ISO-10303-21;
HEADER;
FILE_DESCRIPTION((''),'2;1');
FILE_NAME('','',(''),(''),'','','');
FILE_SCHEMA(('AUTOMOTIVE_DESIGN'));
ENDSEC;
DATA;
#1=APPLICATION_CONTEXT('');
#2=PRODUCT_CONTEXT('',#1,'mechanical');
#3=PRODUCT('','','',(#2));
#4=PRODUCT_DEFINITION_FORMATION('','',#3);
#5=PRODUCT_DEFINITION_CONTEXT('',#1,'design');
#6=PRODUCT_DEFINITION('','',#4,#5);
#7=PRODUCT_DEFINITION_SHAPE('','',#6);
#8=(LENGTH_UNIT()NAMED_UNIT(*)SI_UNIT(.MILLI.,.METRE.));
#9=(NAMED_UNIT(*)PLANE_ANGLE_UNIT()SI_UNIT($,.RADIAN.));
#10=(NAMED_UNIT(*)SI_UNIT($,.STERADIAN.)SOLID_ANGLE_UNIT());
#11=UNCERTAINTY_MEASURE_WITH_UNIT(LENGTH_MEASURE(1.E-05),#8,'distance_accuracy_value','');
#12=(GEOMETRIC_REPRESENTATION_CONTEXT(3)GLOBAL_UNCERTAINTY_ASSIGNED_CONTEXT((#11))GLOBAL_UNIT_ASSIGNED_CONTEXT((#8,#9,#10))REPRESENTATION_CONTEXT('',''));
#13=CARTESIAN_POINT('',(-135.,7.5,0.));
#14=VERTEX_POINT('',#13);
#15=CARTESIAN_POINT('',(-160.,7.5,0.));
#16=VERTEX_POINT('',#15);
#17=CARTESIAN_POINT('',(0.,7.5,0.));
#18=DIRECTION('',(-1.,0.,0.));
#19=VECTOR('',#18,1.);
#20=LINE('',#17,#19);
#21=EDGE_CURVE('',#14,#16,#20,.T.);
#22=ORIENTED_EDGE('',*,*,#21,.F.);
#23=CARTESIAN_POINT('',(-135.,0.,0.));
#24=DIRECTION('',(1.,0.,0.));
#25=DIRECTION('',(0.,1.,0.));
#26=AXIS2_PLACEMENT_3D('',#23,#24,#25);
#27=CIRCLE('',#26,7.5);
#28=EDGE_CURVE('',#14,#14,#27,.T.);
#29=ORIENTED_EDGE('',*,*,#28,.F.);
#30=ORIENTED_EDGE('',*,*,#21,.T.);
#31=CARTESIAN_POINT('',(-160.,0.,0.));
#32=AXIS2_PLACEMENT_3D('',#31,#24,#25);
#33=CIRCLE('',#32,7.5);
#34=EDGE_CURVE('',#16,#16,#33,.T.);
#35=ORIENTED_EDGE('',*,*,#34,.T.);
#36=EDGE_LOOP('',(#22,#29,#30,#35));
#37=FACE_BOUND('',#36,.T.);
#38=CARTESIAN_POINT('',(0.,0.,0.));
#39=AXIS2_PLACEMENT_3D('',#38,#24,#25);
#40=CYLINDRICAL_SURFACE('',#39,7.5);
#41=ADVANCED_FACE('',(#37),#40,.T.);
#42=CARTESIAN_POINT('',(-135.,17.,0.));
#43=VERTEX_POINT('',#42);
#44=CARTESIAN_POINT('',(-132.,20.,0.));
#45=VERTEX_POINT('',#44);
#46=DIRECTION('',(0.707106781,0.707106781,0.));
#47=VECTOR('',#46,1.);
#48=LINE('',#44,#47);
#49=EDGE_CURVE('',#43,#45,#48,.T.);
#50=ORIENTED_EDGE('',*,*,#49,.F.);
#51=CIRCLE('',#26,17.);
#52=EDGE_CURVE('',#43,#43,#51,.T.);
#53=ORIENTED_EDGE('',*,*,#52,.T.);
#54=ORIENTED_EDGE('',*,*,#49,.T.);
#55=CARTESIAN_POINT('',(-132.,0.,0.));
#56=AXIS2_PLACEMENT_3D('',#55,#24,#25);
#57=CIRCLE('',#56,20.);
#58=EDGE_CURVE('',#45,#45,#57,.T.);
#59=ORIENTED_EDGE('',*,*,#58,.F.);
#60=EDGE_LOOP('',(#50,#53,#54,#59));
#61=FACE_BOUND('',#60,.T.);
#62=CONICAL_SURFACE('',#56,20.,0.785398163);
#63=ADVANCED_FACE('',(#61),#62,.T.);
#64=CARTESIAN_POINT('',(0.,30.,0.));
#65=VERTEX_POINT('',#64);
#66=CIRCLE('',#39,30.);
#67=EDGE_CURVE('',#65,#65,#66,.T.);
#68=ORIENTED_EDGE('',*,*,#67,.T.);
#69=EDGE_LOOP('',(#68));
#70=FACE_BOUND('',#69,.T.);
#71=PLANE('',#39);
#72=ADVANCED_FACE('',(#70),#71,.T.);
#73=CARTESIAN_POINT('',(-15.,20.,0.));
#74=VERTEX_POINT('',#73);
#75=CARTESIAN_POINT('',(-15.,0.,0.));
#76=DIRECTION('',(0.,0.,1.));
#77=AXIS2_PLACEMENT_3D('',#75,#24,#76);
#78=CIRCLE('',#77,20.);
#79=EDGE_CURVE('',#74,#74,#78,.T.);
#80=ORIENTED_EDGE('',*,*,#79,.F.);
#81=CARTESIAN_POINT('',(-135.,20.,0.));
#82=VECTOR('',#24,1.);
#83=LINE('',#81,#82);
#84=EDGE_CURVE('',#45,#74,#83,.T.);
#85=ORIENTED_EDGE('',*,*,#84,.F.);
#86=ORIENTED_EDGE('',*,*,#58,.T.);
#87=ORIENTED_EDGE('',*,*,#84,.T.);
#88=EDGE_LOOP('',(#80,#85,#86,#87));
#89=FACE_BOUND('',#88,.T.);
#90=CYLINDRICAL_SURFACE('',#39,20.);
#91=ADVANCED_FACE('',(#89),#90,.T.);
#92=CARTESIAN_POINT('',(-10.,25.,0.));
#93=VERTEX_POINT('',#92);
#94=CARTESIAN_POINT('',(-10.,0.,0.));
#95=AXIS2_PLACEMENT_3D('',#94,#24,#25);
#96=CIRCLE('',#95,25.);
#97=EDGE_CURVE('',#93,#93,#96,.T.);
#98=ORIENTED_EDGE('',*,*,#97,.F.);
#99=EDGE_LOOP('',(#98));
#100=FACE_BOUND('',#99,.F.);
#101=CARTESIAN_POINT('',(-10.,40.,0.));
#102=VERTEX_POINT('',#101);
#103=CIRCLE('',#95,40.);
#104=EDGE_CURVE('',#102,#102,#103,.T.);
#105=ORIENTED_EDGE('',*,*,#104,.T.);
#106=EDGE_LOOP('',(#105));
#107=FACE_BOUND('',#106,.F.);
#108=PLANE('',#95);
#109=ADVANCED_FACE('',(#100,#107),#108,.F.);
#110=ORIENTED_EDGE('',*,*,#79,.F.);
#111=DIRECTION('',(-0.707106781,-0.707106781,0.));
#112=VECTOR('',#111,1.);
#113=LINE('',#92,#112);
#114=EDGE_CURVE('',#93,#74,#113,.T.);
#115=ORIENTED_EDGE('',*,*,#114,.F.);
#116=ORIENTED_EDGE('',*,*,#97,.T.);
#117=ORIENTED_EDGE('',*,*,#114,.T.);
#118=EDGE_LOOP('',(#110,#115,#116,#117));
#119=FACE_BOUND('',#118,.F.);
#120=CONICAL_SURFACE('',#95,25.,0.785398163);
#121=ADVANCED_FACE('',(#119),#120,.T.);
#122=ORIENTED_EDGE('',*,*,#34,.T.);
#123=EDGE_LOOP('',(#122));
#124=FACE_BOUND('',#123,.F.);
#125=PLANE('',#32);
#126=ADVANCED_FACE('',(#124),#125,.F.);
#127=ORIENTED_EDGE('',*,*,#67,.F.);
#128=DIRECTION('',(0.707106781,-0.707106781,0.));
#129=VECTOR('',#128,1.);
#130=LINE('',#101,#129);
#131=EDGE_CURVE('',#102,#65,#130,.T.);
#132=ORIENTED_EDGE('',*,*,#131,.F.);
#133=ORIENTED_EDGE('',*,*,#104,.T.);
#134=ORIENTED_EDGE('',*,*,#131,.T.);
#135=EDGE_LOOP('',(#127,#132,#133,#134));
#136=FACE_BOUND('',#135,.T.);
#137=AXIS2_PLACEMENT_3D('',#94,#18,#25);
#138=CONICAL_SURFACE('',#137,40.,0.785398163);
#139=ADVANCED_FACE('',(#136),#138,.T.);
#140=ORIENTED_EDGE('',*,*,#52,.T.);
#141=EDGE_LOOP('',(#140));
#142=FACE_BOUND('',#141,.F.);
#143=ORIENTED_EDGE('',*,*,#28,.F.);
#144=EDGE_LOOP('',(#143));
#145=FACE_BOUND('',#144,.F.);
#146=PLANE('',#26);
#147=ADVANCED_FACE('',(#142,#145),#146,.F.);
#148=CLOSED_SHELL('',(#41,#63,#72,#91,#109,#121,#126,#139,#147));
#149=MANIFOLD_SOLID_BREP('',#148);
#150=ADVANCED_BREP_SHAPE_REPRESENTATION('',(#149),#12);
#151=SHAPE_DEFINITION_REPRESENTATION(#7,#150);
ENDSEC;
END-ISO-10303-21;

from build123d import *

# Parameters (mm, degrees)
F0_R        = 40
F0_R_2      = 25
F1_DEPTH    = 10
F0_R_3      = 20
F2_DEPTH    = 20
F0_R_4      = 7.5
F3_DEPTH    = 135
F4_DEPTH    = 160
F5_S8_R     = 20
F5_T9_DEPTH = 37
F6_SIZE2    = 3
F6_SIZE     = 3


# Not quite as in the source:
# - a fillet or chamfer that OpenCascade refuses, or shapes differently, is made with other operations: its cross-section is extruded or revolved along the edge and cut away or added


with BuildPart() as f1:
    # F0 (on Right) → F1 (new body)
    with BuildSketch(Plane.YZ):
        Circle(F0_R)
        Circle(F0_R_2, mode=Mode.SUBTRACT)
    extrude(amount=-F1_DEPTH)

    # F0 (on Right) → F2 (join)
    with BuildSketch(Plane.YZ):
        Circle(F0_R_2)
        Circle(F0_R_3, mode=Mode.SUBTRACT)
    extrude(amount=-F2_DEPTH)

    # F0 (on Right) → F3 (join)
    with BuildSketch(Plane.YZ):
        Circle(F0_R_3)
        Circle(F0_R_4, mode=Mode.SUBTRACT)
    extrude(amount=-F3_DEPTH)

    # F0 (on Right) → F4 (join)
    with BuildSketch(Plane.YZ):
        Circle(F0_R_4)
    extrude(amount=-F4_DEPTH)

    # F5: chamfer of 10 on 2 edges, made by hand

    # F5_s1 → F5_t2 (revolve, cut)
    with BuildSketch(Plane.XY):
        Polygon((-10, 40), (0, 30), (0, 40), align=None)
    revolve(axis=Axis((0, 0, 0), (1, 0, 0)), mode=Mode.SUBTRACT)


with BuildPart() as f5_tool4:
    # F5_s5 → F5_t6 (revolve)
    with BuildSketch(Plane.XY):
        Polygon((-10, 25), (-20, 15), (-20, 25), align=None)
    revolve(axis=Axis((-20, 0, 0), (1, 0, 0)))

    split(bisect_by=Plane.YZ.offset(-10), keep=Keep.BOTTOM)

    # F5_s8 → F5_t9 (cut, symmetric)
    with BuildSketch(Plane.YZ.offset(-15)):
        Circle(F5_S8_R)
    extrude(amount=F5_T9_DEPTH, both=True, mode=Mode.SUBTRACT)


with BuildPart() as f1_1:
    add(f1.part)

    # F5_t3: cut F5_tool4
    add(f5_tool4.part, mode=Mode.SUBTRACT)

    # F6
    f6_edges = [f1_1.edges().sort_by_distance(p)[0] for p in [
        (-135, -20, 0),
    ]]
    chamfer(f6_edges, length=F6_SIZE, length2=F6_SIZE2)


solid = f1_1.part
